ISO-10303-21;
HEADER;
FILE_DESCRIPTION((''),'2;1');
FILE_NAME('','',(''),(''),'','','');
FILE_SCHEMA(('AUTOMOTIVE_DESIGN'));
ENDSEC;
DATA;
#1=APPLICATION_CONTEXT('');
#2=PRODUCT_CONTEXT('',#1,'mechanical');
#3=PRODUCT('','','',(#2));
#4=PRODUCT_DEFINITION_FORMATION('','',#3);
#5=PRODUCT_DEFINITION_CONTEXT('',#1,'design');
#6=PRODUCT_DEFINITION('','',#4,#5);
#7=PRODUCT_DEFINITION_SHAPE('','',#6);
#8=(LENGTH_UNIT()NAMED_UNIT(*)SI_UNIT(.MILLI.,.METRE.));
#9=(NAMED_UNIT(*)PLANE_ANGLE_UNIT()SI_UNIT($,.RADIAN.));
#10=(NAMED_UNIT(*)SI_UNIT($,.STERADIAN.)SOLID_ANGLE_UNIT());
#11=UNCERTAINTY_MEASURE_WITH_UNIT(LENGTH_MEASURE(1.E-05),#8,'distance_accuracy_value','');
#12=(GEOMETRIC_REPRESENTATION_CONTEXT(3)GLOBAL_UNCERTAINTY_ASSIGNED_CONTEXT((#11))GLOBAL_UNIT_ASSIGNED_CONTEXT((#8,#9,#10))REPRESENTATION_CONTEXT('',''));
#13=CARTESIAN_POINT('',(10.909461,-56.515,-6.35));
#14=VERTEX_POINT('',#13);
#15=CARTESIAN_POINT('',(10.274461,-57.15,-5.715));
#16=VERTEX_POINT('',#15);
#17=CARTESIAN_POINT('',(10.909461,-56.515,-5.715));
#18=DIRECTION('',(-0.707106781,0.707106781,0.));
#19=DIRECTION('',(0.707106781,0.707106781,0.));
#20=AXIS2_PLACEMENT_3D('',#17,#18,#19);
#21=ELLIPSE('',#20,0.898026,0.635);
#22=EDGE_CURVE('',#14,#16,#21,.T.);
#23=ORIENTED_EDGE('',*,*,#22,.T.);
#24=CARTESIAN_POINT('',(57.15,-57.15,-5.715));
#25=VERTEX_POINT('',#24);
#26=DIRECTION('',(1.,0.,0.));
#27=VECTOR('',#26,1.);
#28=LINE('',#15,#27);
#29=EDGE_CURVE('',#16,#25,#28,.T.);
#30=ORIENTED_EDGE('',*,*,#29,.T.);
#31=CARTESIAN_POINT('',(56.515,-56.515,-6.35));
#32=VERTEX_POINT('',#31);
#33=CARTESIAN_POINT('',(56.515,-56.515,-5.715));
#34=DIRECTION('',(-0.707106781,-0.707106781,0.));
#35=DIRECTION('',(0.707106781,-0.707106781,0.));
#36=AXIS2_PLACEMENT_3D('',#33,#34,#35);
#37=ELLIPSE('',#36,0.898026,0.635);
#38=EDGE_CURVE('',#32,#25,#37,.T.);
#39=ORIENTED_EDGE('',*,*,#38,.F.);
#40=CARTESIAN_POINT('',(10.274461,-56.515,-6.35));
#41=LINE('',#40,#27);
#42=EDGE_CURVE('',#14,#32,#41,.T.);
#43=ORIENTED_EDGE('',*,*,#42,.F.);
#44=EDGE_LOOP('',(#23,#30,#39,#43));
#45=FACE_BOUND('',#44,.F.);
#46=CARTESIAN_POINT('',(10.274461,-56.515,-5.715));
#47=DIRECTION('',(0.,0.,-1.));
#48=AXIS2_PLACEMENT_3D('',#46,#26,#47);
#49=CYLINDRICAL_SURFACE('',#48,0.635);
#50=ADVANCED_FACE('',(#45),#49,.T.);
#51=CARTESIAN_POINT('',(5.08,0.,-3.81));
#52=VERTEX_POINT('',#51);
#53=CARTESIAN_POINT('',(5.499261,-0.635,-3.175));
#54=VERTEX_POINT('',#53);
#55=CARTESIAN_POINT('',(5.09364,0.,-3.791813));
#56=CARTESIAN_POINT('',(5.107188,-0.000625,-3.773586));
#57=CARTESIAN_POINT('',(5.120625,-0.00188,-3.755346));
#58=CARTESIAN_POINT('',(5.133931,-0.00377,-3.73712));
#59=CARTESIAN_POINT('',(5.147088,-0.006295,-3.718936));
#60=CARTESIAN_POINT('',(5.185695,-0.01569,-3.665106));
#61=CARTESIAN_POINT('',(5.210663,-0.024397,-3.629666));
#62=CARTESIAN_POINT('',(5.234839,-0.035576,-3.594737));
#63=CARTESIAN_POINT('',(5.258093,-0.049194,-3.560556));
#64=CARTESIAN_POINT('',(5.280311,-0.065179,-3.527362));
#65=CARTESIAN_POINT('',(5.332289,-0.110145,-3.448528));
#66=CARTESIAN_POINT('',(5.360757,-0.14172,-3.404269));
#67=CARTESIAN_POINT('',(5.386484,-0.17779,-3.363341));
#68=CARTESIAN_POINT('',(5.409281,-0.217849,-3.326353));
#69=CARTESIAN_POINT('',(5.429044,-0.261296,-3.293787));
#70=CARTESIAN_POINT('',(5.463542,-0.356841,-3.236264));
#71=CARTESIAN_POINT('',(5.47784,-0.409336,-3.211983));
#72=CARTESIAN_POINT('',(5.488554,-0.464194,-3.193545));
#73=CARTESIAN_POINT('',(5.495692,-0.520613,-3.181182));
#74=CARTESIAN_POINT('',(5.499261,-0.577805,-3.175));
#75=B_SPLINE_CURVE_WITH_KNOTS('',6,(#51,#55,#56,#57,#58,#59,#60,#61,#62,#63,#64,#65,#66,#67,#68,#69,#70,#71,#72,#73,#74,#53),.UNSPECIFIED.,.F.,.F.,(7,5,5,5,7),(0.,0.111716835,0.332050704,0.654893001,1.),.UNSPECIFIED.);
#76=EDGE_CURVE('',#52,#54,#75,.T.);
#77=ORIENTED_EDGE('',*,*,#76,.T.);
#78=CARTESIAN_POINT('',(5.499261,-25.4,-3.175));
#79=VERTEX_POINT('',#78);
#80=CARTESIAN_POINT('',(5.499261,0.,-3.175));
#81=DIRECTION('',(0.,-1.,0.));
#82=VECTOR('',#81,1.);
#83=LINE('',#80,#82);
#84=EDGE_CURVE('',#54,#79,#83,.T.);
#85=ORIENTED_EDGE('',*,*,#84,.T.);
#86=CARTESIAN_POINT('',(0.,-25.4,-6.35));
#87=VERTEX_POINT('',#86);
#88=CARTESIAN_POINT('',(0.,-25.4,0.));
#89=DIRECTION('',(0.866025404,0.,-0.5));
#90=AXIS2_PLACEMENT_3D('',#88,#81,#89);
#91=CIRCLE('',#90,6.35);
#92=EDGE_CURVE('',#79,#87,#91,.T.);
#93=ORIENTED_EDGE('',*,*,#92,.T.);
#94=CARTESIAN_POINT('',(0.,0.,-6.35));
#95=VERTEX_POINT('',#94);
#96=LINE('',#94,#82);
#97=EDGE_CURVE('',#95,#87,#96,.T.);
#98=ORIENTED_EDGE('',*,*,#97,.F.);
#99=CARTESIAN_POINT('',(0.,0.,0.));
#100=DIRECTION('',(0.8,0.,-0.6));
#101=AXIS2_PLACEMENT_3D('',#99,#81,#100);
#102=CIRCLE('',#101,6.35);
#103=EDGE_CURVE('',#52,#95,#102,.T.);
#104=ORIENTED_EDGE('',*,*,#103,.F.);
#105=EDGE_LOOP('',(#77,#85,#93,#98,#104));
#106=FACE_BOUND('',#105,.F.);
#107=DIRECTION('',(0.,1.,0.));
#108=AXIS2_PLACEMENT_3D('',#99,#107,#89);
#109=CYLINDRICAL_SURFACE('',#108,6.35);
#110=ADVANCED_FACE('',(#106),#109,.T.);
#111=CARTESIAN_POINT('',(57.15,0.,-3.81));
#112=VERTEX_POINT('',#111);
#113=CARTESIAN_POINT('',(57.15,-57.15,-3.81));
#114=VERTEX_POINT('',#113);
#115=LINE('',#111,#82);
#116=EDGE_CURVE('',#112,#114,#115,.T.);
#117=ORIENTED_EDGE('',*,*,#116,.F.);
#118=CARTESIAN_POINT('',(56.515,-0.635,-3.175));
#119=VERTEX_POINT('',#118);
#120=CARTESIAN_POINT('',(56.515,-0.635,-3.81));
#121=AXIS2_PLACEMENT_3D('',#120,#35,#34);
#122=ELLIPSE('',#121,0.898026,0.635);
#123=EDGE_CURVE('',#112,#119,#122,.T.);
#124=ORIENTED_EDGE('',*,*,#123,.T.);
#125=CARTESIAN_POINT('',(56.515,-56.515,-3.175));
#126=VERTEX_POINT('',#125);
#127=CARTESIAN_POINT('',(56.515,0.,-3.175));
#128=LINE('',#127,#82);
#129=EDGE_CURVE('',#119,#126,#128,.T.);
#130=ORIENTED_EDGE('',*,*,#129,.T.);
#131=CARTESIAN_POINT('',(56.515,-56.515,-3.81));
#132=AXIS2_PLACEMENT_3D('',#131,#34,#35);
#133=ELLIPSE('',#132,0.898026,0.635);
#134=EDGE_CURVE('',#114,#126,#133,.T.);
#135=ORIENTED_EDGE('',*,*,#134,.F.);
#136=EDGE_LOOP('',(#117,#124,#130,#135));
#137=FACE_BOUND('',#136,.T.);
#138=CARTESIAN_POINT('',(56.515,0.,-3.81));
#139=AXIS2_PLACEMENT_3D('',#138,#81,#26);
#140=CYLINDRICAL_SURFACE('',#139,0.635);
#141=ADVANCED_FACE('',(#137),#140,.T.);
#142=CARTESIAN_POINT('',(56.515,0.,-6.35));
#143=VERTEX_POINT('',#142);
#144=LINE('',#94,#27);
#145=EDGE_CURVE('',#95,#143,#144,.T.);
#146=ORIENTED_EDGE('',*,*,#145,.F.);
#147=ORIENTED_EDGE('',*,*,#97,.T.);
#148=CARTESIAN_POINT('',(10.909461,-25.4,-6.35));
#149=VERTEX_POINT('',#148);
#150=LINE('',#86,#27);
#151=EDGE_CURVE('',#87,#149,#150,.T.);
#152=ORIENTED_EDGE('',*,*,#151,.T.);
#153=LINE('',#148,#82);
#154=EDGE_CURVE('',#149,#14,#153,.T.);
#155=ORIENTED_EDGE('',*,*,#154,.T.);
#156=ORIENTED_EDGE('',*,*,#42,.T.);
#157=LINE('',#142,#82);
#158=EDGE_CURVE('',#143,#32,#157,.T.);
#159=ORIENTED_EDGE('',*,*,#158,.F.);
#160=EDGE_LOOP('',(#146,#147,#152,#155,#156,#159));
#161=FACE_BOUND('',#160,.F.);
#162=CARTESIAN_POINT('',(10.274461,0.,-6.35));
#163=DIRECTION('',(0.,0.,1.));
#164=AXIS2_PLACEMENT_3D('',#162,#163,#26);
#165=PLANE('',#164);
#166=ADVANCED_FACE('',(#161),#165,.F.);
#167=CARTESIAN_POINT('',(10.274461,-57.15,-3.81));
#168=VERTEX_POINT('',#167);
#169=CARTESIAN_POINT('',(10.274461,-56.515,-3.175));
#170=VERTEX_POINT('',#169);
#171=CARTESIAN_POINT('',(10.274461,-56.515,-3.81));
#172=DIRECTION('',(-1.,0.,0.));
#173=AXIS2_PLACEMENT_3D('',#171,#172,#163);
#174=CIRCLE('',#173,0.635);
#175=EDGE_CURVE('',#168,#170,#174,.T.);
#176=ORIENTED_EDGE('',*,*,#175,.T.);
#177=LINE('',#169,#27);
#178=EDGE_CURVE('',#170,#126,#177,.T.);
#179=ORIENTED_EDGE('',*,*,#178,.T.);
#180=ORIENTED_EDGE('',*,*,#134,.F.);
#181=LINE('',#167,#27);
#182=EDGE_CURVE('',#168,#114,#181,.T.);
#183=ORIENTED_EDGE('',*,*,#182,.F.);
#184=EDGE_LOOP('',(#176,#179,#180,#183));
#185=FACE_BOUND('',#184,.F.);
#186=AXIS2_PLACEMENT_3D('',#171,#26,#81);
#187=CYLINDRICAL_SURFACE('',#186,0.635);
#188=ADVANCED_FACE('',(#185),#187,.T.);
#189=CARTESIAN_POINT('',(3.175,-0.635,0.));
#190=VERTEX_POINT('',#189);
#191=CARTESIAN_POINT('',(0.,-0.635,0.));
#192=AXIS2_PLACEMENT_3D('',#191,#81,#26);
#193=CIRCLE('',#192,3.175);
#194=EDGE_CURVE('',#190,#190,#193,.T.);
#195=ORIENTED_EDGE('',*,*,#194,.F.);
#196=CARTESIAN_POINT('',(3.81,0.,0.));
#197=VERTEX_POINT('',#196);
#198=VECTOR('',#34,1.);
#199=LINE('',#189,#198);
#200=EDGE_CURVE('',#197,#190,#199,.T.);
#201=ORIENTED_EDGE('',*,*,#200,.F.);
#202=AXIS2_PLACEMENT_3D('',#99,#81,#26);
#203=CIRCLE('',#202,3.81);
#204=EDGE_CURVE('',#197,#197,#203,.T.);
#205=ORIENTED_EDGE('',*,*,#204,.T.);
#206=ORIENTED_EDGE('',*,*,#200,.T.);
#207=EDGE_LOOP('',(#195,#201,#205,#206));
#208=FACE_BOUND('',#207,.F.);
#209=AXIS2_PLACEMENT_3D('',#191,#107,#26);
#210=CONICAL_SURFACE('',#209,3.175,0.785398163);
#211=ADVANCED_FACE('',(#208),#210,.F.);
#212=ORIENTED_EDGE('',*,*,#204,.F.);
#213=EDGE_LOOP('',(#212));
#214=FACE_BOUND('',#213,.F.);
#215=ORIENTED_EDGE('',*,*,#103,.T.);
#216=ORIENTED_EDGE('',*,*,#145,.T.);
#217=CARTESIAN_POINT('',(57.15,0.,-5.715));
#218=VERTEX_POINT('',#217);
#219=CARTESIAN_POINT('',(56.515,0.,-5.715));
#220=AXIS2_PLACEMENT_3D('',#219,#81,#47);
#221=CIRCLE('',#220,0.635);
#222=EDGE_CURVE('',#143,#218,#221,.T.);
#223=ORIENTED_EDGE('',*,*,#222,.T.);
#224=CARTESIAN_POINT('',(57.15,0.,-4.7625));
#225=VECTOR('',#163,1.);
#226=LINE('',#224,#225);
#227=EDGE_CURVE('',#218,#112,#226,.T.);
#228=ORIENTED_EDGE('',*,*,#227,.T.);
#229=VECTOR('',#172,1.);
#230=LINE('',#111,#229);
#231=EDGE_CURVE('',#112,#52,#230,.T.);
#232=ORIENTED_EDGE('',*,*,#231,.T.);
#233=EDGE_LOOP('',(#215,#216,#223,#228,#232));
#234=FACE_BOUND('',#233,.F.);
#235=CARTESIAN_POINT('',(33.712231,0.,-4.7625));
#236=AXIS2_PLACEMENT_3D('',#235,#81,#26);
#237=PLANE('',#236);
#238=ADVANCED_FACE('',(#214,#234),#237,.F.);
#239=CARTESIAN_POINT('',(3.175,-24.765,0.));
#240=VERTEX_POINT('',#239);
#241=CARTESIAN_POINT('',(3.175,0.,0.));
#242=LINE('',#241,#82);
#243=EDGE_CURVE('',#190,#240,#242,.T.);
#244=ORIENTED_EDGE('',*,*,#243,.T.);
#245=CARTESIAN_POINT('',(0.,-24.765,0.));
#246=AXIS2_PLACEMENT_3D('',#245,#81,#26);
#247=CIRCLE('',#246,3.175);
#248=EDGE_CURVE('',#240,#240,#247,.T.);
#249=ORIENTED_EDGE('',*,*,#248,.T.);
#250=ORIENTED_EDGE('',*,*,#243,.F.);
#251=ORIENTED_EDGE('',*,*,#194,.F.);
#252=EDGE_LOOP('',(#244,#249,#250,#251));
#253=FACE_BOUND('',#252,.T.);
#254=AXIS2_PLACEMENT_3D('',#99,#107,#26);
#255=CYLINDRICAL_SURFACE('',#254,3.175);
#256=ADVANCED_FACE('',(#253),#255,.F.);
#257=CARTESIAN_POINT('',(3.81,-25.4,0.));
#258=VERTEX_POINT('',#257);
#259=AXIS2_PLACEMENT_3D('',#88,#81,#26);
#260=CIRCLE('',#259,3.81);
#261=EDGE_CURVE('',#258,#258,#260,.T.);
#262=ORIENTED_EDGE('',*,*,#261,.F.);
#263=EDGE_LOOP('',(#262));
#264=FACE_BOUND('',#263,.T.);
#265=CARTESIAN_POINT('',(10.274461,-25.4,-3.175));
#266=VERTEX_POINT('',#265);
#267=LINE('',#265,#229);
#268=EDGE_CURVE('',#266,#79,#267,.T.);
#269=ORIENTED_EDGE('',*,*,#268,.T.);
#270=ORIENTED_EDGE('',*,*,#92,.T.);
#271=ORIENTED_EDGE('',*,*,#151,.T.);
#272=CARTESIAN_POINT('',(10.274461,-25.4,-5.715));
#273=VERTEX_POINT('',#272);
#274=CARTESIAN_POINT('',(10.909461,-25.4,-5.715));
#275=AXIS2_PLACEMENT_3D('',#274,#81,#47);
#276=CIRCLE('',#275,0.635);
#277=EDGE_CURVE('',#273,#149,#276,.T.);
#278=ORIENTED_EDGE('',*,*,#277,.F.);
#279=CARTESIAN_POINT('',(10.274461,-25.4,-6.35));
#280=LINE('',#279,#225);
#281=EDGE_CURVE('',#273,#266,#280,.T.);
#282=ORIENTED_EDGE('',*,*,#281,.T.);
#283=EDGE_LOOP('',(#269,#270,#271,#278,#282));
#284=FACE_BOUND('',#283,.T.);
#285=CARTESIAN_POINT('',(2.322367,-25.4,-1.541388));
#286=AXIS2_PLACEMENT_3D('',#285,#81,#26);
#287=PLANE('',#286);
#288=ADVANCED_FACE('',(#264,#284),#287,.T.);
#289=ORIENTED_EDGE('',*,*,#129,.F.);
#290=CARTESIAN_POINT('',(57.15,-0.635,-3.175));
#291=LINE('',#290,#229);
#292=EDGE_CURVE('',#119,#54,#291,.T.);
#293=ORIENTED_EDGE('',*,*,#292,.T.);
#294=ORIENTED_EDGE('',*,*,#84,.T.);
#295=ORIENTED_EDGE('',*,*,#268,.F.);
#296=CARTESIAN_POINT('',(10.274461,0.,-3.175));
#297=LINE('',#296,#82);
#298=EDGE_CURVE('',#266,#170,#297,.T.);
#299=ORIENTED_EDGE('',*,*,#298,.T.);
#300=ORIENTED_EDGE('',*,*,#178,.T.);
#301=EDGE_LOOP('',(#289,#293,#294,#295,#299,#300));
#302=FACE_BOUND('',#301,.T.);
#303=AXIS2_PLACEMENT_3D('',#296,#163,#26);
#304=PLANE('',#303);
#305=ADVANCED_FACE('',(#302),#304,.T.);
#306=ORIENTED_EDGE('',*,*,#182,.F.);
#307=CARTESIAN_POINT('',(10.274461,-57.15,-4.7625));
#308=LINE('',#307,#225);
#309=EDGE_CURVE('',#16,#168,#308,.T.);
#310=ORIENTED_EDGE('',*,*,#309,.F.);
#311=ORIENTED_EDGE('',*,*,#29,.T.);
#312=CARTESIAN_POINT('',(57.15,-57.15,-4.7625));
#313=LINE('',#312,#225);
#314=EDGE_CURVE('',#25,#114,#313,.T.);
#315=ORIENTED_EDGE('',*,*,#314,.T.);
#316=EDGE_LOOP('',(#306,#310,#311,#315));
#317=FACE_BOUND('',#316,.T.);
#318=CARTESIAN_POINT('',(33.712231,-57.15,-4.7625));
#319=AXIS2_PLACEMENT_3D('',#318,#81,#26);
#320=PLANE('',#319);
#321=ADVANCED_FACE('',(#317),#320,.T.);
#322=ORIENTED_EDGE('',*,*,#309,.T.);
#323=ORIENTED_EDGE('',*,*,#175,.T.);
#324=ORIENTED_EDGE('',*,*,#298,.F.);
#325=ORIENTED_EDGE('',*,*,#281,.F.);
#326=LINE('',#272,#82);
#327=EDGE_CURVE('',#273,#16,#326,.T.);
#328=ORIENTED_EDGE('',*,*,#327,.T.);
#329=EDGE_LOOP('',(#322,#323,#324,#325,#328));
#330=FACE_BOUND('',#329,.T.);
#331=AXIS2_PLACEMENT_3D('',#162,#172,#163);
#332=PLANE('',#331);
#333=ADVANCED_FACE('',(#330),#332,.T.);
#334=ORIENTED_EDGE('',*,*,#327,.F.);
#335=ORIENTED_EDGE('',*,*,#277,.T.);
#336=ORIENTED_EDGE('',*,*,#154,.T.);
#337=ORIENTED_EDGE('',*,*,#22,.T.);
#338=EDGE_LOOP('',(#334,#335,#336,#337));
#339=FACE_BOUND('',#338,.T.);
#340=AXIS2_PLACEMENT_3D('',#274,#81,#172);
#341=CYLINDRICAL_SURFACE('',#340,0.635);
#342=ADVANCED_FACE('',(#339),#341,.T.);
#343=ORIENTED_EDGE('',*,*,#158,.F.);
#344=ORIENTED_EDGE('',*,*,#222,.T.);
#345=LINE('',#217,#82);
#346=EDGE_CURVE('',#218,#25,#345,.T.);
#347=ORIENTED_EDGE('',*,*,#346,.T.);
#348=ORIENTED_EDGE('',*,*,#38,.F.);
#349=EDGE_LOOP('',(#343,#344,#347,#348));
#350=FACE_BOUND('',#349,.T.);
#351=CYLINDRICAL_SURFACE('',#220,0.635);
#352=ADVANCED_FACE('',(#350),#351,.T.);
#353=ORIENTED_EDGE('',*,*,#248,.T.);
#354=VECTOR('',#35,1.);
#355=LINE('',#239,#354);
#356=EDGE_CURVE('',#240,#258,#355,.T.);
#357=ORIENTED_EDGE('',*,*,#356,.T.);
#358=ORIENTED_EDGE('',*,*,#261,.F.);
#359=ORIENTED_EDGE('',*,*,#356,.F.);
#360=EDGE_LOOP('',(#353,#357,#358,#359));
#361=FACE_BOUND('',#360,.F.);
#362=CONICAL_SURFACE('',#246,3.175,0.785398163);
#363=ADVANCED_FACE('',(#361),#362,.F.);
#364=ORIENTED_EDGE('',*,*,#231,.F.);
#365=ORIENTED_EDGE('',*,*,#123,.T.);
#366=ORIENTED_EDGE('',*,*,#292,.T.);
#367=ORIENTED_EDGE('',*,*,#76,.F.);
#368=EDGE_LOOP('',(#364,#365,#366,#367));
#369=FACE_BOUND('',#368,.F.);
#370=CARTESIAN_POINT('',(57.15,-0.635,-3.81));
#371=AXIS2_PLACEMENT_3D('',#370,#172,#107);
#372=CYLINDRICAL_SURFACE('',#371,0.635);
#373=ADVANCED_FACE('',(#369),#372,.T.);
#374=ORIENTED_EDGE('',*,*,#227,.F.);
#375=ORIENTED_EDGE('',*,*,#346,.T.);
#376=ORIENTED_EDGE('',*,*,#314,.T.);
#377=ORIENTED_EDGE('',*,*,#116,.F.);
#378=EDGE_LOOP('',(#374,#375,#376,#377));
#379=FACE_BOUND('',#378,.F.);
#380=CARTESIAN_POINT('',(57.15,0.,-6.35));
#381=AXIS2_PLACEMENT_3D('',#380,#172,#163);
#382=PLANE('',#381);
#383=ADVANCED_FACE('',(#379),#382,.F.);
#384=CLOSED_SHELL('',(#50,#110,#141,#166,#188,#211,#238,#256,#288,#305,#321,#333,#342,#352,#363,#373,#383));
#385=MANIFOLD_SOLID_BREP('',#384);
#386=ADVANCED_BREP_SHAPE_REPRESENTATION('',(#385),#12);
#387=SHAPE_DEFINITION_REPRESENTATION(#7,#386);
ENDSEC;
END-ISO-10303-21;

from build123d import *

# Parameters (mm, degrees)
F0_R     = 3.175
F1_DEPTH = 25.4
F0_W     = 46.875538686
F0_H     = 3.175
F2_DEPTH = 57.15
F3_R     = 0.635
F4_SIZE  = 0.635


with BuildPart() as f1:
    # F0 (on Front) → F1 (new body)
    with BuildSketch(Plane.XZ):
        with BuildLine():
            ThreePointArc((5.499261314, -3.175), (-3.175, 5.499261314), (0, -6.35))
            Line((0, -6.35), (10.274461314, -6.35))
            Line((10.274461314, -6.35), (10.274461314, -3.175))
            Line((10.274461314, -3.175), (5.499261314, -3.175))
        make_face()
        Circle(F0_R, mode=Mode.SUBTRACT)
    extrude(amount=F1_DEPTH)

    # F0 (on Front) → F2 (join)
    with BuildSketch(Plane.XZ):
        with Locations((33.712230657, -4.7625)):
            Rectangle(F0_W, F0_H)
    extrude(amount=F2_DEPTH)

    # F3
    f3_edges = [f1.edges().sort_by_distance(p)[0] for p in [
        (33.712231, -57.15, -3.175),
        (33.712231, -57.15, -6.35),
        (57.15, -28.575, -3.175),
        (57.15, -28.575, -6.35),
        (31.324631, 0, -3.175),
        (10.274461, -41.275, -6.35),
    ]]
    fillet(f3_edges, radius=F3_R)

    # F4
    f4_edges = [f1.edges().sort_by_distance(p)[0] for p in [
        (-3.175, -25.4, 0),
        (-3.175, 0, 0),
    ]]
    chamfer(f4_edges, length=F4_SIZE)


solid = f1.part
